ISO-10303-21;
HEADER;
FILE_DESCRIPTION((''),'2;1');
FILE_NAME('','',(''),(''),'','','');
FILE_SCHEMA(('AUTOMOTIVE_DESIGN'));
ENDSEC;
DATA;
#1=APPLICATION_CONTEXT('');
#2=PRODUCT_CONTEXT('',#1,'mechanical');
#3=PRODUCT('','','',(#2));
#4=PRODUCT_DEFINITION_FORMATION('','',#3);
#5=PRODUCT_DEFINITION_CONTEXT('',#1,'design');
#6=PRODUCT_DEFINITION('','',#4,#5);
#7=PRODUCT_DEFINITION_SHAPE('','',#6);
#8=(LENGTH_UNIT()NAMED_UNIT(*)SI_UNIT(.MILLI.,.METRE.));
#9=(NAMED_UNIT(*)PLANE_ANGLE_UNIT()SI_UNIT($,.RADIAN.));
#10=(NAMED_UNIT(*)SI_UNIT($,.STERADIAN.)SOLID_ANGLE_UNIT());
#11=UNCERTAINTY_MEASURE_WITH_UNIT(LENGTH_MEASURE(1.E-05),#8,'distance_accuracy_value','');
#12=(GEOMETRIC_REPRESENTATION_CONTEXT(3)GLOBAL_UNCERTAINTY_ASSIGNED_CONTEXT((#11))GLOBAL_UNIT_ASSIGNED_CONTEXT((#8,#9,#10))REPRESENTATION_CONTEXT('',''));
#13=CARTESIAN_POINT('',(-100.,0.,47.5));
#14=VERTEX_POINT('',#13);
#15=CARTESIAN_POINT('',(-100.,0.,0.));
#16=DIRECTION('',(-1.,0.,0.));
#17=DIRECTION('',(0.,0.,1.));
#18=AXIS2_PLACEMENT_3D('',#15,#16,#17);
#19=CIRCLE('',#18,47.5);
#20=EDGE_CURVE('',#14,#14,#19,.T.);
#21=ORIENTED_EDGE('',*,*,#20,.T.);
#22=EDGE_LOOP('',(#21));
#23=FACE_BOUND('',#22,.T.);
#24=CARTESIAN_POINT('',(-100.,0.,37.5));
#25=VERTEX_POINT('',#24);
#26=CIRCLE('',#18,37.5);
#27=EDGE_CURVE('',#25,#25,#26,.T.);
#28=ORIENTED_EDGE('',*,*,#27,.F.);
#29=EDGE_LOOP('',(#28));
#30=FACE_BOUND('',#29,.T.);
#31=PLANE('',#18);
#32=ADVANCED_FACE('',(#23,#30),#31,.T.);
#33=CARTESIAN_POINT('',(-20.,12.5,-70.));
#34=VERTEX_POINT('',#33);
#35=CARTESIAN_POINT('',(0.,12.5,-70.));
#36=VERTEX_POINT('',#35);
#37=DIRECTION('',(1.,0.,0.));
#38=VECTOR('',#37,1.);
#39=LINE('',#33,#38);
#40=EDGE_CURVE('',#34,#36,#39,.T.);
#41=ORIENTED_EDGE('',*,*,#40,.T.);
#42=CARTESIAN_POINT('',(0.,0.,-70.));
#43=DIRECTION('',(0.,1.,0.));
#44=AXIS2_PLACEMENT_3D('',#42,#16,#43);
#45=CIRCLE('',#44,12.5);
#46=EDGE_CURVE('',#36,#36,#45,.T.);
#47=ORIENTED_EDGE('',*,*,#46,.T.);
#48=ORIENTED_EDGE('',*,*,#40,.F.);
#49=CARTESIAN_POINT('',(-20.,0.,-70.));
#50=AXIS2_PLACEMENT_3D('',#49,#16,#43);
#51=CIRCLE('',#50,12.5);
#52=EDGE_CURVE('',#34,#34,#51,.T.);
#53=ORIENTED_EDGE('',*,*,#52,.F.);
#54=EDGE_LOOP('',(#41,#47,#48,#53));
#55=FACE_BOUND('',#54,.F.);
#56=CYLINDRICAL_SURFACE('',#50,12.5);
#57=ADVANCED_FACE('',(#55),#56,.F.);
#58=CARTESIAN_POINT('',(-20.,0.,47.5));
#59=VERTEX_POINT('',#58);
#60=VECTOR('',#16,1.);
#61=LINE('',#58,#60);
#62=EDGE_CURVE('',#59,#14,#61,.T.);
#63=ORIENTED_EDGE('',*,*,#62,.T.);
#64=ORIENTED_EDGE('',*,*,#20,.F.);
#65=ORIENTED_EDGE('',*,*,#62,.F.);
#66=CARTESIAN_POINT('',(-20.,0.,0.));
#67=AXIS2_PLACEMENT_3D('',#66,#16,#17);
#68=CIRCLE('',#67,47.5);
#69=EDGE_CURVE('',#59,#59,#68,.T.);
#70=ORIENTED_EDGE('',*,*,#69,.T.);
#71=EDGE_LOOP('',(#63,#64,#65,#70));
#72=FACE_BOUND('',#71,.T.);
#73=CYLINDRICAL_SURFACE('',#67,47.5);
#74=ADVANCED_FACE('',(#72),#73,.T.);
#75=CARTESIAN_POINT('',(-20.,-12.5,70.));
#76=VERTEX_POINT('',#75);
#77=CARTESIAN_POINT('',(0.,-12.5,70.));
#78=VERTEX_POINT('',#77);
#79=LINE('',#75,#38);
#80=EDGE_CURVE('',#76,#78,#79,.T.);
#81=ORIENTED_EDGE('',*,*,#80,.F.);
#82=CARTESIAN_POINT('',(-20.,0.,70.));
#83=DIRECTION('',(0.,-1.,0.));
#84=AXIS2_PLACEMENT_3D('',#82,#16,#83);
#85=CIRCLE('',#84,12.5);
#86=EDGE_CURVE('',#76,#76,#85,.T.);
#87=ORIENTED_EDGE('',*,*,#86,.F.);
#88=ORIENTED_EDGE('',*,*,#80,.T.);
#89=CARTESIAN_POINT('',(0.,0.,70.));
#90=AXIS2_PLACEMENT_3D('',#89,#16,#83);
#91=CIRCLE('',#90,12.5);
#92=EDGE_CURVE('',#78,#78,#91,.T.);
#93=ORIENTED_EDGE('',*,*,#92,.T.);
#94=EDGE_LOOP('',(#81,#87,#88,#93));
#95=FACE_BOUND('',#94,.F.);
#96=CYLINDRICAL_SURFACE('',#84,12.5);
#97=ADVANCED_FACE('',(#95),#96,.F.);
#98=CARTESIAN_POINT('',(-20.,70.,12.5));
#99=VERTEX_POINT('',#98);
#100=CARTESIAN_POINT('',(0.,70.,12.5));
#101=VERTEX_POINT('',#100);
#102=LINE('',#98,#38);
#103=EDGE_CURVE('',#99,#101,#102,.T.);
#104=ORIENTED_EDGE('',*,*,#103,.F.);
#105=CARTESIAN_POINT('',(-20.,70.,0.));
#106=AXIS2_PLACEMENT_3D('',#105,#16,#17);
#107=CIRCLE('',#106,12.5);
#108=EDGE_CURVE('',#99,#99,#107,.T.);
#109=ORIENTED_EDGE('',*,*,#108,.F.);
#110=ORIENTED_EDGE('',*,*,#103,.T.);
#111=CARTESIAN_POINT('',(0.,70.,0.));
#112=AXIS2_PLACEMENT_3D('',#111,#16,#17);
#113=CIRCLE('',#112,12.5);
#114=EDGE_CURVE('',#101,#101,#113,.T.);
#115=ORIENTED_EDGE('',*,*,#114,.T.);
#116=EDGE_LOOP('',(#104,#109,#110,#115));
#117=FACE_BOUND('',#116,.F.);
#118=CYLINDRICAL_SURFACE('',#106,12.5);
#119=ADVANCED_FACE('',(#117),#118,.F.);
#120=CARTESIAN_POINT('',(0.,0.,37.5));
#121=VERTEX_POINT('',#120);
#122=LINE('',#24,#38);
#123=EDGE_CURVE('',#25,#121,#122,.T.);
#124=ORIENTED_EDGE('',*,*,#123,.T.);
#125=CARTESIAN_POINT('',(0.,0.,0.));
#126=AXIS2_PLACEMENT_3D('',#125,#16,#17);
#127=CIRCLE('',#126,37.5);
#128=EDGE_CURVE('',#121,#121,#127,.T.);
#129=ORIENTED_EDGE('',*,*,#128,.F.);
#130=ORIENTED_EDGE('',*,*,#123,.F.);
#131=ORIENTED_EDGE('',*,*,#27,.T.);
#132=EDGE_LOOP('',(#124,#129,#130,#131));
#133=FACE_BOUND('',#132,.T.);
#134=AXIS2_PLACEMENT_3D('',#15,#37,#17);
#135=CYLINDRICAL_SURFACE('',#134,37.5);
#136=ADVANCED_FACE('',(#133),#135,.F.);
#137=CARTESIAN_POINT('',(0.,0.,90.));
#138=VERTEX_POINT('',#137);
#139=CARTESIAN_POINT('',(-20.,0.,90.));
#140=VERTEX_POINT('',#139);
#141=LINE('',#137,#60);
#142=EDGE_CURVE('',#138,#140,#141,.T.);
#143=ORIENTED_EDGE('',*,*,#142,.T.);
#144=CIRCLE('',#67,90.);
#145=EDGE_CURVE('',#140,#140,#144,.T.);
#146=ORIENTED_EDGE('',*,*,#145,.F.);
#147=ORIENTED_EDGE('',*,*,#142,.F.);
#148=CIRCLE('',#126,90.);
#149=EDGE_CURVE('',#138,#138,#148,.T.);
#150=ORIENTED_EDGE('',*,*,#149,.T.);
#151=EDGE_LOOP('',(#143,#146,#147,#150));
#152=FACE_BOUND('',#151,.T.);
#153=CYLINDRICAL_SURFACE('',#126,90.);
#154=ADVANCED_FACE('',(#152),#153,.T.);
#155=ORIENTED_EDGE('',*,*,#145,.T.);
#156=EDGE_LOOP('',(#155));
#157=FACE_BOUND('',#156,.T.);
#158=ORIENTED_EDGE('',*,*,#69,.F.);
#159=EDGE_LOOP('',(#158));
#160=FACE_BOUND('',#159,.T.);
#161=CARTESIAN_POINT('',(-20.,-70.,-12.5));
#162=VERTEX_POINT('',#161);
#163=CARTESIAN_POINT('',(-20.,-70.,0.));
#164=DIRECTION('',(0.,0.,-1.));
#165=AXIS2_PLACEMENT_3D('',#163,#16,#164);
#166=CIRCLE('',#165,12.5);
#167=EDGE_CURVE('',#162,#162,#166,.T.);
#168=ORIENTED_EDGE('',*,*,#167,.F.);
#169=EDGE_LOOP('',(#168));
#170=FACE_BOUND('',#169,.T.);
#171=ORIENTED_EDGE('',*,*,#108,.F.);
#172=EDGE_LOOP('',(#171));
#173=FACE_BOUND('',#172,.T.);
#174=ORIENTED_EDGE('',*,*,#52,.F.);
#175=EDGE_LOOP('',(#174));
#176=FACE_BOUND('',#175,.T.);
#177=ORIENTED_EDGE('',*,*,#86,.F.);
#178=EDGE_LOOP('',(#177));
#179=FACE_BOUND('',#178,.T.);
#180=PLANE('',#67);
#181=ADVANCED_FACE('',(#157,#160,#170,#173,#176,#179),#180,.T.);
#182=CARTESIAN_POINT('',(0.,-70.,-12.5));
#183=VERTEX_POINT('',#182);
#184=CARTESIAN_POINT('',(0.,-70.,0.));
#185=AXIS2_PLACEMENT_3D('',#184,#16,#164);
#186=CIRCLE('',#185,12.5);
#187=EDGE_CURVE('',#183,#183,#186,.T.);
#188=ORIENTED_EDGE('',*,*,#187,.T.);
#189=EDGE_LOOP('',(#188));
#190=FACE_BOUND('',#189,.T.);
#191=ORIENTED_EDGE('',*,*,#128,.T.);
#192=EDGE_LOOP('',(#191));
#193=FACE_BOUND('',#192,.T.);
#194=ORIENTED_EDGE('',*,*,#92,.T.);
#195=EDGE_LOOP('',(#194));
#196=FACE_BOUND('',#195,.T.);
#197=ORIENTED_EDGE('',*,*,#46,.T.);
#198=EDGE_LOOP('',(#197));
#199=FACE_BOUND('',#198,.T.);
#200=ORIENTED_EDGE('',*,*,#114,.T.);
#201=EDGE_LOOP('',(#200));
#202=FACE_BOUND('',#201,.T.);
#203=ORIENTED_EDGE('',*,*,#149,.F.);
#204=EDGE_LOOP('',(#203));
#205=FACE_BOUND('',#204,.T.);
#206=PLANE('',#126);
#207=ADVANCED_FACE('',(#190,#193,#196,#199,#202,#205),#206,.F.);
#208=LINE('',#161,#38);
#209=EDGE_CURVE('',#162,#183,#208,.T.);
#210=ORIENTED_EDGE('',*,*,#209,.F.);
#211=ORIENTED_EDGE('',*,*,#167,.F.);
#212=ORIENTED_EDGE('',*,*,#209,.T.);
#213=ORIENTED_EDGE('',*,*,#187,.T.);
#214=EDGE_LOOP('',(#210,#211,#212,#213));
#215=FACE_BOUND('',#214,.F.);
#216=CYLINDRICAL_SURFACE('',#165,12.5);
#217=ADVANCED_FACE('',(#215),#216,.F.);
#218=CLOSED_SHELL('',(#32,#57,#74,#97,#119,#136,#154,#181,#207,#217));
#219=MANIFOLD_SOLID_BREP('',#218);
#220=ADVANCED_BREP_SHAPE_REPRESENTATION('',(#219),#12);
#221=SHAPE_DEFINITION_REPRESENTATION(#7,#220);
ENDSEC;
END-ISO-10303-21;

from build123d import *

# Parameters (mm, degrees)
F2_R            = 12.5
F3_DEPTH        = 85
F3_COPIES_COUNT = 4


# Not quite as in the source:
# - a pattern or mirror of a feature is missing from the dataset's text; its kind, count and spacing are read off the source's solid


with BuildPart() as f1:
    # F0 (on Front) → F1 (revolve)
    with BuildSketch(Plane.XZ):
        Polygon((-100, 47.5), (-100, 37.5), (0, 37.5), (0, 90), (-20, 90), (-20, 47.5), align=None)
    revolve(axis=Axis((-54.4903725386, 0, 0), (-1, 0, 0)))

    # F2 (on face) → F3 (cut)
    with BuildSketch(Plane(origin=(-20, 0, 0), x_dir=(0, -1, 0), z_dir=(-1, 0, 0))):
        with Locations((0, 70)):
            Circle(F2_R)
    f3 = extrude(amount=-F3_DEPTH, mode=Mode.SUBTRACT)

    # F3_copies: F3 ×4 about axis
    f3_copies_axis = Axis((0, 0, 0), (1, 0, 0))
    for i in range(1, F3_COPIES_COUNT):
        add(f3.rotate(f3_copies_axis, i * 360 / F3_COPIES_COUNT), mode=Mode.SUBTRACT)


solid = f1.part
